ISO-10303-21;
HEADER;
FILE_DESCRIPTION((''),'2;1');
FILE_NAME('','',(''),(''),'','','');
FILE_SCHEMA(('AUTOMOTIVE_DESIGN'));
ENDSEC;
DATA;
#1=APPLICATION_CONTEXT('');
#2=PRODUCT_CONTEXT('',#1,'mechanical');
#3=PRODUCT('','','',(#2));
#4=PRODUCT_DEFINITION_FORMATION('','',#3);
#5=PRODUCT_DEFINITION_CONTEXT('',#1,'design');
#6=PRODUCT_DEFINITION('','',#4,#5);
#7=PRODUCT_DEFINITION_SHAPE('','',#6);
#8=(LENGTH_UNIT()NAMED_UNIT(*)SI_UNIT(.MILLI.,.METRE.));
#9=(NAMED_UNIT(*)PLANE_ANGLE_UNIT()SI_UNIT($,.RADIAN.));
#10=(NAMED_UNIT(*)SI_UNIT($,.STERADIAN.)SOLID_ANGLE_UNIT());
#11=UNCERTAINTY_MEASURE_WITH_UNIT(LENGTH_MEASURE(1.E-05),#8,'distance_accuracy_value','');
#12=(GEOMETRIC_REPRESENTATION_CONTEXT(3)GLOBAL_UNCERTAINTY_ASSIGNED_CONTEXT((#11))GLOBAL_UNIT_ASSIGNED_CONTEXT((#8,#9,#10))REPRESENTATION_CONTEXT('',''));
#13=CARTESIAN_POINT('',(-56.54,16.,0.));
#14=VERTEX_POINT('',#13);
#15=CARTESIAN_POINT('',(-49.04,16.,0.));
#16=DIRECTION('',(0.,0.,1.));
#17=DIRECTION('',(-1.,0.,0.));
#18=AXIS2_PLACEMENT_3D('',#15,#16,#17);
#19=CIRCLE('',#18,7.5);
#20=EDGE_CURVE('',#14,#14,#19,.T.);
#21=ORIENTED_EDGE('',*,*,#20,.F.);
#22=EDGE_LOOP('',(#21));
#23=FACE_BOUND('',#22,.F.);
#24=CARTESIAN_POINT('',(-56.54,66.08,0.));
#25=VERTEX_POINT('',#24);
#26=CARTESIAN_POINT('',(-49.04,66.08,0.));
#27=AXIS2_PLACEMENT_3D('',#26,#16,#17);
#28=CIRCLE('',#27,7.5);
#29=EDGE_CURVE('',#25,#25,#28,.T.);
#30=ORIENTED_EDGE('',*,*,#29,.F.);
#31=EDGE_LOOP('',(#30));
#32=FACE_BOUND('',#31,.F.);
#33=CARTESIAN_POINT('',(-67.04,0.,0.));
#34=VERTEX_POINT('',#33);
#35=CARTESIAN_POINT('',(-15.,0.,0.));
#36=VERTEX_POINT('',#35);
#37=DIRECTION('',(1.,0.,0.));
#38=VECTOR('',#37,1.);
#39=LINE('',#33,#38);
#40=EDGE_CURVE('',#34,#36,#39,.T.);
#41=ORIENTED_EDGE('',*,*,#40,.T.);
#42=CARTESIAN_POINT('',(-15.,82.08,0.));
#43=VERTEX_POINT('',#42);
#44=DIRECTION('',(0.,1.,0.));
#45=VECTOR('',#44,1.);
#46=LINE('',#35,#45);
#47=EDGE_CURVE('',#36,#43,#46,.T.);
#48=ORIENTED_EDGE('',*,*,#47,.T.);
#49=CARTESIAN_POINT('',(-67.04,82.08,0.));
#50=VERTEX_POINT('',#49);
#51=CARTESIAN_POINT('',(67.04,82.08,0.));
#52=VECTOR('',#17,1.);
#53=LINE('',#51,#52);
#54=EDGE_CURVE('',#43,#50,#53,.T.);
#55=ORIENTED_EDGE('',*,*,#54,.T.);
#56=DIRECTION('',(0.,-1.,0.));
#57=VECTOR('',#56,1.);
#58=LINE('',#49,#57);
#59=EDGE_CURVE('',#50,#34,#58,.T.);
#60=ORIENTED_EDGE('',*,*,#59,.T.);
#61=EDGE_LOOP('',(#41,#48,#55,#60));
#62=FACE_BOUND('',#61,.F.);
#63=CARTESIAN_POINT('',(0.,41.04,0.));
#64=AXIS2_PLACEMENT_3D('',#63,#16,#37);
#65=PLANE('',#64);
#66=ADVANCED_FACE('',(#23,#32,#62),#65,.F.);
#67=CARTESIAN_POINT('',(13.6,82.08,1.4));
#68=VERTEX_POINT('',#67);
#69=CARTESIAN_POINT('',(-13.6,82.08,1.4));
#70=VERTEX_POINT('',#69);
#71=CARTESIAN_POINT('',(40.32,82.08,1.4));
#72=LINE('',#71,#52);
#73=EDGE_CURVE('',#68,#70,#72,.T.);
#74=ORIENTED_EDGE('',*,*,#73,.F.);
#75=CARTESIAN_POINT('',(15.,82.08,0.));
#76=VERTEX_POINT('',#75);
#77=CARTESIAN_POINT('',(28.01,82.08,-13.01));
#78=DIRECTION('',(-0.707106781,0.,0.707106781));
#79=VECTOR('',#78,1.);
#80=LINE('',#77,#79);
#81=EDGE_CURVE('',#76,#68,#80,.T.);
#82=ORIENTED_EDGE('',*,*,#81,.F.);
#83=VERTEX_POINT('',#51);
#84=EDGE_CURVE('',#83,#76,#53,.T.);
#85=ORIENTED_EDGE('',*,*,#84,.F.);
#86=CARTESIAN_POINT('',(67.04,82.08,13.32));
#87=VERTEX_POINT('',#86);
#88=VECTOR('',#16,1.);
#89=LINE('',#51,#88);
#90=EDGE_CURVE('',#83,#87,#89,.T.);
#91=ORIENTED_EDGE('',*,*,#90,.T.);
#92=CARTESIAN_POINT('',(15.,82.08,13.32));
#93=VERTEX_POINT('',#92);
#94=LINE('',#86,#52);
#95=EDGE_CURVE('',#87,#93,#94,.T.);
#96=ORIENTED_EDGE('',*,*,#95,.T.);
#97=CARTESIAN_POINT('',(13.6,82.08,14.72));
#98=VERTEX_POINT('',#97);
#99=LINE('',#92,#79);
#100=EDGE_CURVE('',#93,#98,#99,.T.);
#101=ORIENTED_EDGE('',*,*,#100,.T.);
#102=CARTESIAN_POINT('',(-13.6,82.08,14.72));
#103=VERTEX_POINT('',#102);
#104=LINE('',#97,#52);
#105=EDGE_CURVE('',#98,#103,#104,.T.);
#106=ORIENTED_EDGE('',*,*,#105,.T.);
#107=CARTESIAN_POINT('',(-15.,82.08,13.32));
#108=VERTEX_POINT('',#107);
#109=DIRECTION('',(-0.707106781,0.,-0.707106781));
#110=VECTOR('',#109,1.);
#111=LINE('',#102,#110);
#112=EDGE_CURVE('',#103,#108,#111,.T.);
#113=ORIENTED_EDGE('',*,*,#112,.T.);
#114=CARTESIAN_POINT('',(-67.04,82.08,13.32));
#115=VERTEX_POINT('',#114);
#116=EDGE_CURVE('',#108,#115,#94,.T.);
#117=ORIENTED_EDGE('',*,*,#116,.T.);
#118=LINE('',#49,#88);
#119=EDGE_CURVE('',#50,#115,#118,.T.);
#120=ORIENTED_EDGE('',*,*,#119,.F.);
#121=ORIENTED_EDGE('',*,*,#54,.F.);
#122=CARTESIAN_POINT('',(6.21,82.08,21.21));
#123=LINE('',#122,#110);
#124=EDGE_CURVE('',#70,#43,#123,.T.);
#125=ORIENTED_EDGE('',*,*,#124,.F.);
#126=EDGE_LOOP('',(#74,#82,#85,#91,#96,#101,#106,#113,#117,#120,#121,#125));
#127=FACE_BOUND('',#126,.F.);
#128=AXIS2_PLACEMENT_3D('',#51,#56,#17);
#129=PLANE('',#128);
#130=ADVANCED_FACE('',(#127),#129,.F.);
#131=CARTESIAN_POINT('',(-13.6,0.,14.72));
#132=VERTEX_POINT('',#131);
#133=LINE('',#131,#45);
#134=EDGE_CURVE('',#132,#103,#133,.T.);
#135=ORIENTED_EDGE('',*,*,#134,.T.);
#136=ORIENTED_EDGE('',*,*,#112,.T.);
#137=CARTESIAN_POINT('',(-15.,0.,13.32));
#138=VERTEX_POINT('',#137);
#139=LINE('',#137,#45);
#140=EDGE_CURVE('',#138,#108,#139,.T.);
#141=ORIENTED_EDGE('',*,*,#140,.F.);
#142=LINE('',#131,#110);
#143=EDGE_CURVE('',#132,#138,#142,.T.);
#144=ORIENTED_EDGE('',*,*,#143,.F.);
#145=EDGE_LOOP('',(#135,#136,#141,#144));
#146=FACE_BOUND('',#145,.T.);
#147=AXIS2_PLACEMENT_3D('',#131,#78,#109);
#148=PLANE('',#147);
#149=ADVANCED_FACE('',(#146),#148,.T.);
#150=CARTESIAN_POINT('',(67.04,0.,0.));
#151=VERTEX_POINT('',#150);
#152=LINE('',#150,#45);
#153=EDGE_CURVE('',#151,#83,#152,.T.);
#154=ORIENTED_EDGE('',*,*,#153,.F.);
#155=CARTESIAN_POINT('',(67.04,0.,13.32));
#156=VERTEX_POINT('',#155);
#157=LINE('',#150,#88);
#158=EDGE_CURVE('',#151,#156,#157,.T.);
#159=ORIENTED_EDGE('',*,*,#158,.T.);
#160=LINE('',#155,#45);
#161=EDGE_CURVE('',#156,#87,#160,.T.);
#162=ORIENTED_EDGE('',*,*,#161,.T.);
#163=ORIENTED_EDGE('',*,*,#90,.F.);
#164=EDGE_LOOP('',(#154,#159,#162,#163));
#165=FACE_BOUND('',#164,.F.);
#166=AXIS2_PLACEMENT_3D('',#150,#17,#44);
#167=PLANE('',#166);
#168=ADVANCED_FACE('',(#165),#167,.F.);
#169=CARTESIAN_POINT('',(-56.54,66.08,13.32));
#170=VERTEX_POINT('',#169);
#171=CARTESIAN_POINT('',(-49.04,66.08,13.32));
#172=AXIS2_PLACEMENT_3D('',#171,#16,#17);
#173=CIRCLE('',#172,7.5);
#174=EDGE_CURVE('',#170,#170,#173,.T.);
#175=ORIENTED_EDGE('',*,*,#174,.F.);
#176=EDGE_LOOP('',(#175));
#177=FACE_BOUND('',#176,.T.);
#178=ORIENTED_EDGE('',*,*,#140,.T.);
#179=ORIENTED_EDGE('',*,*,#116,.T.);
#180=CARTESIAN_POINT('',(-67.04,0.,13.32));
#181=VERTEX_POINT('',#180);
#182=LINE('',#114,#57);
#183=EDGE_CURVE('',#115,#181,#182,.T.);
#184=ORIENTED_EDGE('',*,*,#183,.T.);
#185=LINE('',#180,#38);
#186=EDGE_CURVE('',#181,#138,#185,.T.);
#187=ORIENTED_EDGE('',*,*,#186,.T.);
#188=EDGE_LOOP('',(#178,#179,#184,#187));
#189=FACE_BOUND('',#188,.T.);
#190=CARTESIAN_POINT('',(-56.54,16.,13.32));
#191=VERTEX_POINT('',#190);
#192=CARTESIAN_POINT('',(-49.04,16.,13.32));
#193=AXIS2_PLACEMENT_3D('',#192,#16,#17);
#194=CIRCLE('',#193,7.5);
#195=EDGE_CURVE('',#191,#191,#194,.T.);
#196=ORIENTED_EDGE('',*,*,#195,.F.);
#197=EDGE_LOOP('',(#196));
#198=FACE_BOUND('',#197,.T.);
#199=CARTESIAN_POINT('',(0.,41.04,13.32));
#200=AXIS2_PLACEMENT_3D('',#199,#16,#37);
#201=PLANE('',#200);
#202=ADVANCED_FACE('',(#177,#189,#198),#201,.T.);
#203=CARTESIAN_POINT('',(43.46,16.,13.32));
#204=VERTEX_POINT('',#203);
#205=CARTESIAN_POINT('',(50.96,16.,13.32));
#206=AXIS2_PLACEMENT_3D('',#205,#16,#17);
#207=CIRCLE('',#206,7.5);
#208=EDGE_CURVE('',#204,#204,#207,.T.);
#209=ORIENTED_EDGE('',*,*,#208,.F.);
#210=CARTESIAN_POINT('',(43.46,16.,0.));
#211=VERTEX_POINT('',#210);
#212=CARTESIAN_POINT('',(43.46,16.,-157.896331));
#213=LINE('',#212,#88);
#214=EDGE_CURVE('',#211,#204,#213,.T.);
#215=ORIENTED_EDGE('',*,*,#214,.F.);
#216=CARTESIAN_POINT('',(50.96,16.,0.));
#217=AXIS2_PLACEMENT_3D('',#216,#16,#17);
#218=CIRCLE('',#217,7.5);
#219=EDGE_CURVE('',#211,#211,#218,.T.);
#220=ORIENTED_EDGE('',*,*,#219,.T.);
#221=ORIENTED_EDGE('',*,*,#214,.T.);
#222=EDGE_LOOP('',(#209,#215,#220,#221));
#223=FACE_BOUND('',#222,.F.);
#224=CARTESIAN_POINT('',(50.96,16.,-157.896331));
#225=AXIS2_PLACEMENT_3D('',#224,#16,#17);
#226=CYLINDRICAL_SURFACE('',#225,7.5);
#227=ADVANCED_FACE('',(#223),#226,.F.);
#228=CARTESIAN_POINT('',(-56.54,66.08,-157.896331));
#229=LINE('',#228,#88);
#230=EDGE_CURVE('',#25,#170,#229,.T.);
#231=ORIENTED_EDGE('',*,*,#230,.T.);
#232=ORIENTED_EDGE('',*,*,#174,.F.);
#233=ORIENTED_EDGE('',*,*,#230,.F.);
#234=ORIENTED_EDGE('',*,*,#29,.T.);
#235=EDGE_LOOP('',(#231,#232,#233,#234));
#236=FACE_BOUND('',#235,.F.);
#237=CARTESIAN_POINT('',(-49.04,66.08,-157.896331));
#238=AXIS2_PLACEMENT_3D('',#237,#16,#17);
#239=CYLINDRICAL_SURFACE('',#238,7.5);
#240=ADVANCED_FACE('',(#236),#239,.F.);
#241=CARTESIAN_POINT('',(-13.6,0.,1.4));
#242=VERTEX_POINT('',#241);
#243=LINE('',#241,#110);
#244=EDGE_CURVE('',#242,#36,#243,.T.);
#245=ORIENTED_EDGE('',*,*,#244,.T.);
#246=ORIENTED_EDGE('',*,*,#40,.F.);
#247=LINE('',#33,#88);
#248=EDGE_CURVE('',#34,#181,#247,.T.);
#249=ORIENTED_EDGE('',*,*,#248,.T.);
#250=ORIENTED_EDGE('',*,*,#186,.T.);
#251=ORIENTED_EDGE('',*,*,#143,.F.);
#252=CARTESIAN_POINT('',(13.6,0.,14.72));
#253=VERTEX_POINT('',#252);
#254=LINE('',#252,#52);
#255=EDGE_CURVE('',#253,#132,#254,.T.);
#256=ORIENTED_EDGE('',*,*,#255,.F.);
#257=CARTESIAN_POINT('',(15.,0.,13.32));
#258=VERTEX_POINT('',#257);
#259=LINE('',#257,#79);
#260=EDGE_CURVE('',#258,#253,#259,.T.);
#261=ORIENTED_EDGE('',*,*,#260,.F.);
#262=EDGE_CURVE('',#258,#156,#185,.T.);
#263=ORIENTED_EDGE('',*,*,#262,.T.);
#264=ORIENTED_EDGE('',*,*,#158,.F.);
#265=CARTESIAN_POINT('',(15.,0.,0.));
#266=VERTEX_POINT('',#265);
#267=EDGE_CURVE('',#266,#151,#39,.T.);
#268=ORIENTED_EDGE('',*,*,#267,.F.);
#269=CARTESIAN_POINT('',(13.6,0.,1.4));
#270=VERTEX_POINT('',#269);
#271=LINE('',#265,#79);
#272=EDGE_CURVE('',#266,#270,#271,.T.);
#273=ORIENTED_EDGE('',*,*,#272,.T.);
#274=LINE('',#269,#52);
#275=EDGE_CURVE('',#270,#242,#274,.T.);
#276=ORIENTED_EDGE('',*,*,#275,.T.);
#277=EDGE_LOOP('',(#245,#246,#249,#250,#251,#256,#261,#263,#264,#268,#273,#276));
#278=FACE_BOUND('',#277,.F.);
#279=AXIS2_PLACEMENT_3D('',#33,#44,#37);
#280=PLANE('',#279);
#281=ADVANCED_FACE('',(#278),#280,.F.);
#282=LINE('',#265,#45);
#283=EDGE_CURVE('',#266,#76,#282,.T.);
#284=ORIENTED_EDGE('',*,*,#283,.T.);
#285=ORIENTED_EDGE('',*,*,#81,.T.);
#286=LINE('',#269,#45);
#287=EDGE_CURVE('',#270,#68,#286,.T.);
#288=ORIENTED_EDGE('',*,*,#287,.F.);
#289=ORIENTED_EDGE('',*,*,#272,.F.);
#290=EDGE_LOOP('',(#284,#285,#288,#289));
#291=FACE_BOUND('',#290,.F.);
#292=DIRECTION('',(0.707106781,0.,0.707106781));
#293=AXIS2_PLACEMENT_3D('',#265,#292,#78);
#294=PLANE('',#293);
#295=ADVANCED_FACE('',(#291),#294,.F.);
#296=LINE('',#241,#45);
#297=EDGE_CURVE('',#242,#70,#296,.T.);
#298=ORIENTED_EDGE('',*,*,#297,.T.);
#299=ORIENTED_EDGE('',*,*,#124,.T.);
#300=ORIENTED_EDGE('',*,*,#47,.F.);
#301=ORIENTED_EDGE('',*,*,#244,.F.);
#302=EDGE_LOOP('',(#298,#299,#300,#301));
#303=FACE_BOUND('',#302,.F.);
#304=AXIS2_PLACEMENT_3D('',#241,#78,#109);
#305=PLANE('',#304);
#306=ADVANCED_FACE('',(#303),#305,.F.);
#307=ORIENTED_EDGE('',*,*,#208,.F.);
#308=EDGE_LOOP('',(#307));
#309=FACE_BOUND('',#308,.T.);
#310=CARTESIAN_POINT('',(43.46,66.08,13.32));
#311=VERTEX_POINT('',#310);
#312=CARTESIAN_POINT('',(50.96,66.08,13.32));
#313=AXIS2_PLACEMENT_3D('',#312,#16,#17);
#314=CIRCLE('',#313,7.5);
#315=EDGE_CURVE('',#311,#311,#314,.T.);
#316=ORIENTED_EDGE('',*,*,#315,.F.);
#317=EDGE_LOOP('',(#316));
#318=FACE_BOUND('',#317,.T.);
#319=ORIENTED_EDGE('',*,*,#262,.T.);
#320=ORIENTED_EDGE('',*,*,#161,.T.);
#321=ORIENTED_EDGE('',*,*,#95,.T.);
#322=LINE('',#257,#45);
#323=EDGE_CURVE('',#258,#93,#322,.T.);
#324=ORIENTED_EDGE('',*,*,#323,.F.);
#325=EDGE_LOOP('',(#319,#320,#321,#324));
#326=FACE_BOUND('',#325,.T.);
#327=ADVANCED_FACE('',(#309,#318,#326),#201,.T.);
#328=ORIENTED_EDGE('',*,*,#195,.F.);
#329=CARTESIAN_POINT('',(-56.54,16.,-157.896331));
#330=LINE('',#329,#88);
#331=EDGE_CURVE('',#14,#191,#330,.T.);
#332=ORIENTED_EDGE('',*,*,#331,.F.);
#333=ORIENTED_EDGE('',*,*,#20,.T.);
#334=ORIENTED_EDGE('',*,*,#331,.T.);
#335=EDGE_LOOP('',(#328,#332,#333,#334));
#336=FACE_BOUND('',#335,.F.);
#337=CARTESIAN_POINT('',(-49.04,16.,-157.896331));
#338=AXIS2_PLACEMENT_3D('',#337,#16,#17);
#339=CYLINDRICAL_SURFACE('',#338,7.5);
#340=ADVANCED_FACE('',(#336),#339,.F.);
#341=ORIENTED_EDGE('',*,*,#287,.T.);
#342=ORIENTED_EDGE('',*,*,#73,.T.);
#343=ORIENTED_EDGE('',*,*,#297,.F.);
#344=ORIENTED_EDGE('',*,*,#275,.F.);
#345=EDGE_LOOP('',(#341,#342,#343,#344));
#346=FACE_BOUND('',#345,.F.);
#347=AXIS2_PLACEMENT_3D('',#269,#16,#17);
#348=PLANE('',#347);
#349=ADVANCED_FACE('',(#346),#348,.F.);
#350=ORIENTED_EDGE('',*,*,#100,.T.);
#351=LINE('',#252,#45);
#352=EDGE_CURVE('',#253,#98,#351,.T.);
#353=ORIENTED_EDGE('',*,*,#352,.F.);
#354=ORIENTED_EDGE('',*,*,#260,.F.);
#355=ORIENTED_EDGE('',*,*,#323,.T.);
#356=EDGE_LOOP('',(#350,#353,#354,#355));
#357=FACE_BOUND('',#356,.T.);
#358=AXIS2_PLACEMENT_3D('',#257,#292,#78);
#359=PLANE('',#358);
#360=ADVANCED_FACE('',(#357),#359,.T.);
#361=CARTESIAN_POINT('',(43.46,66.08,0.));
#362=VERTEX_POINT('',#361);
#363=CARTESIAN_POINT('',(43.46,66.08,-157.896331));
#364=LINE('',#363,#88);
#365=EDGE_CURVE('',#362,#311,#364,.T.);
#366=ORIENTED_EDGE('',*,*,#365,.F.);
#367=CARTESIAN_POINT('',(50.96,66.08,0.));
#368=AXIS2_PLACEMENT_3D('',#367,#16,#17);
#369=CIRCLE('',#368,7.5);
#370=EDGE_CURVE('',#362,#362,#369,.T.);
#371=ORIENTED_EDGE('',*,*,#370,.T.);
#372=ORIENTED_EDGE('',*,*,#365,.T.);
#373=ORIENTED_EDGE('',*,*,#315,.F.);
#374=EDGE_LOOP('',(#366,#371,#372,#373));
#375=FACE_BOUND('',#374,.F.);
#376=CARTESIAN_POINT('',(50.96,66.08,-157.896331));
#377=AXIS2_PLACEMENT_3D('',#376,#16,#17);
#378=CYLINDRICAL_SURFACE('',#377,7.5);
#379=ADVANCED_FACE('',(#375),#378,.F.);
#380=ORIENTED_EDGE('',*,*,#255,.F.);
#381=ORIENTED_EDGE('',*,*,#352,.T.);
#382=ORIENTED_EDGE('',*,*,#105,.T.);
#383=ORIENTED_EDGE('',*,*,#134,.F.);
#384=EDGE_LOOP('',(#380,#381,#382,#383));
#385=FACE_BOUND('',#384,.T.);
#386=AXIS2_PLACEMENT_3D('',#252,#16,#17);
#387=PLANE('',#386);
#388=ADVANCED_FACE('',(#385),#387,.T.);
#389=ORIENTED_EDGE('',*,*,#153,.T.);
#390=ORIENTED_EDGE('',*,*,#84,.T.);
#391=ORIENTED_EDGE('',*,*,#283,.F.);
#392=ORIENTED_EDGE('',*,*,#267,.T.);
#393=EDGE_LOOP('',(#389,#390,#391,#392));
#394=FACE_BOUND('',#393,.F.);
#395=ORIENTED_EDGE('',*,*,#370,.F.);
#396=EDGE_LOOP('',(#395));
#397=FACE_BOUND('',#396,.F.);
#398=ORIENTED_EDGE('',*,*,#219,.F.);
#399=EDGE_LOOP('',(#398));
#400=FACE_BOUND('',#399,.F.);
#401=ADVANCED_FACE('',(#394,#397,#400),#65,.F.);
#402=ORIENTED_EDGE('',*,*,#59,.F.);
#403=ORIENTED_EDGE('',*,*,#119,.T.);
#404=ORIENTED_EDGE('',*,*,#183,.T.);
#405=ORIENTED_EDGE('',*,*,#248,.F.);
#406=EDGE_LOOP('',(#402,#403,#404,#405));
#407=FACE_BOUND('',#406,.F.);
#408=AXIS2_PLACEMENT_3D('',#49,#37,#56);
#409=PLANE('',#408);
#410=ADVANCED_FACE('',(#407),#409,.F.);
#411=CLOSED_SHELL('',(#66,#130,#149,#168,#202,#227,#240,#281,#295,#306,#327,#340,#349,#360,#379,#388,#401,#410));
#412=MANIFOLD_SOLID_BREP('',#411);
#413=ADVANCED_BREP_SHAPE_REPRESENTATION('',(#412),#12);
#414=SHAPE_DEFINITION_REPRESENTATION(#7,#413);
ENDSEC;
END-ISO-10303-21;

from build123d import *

# Parameters (mm, degrees)
F1_DEPTH = 13.32
F4_DEPTH = 82.081
F7_DEPTH = 82.08
F9_D     = 15


with BuildPart() as f1:
    # F0 (on Top) → F1 (new body)
    with BuildSketch(Plane.XY):
        Polygon((-67.04, 0), (0, 0), (67.04, 0), (67.04, 82.08), (-67.04, 82.08), align=None)
    extrude(amount=F1_DEPTH)

    # F3 (on offset) → F4 (cut, through all)
    with BuildSketch(Plane.XZ):
        Polygon((-15, 0), (0, 0), (15, 0), (13.6, 1.4), (-13.6, 1.4), align=None)
    extrude(amount=-F4_DEPTH, mode=Mode.SUBTRACT)

    # F6 (on offset) → F7 (join)
    with BuildSketch(Plane.XZ):
        Polygon((-15, 13.32), (0, 13.32), (15, 13.32), (13.6, 14.72), (-13.6, 14.72), align=None)
    extrude(amount=-F7_DEPTH)

    # F9 (through all)
    with Locations(Plane(origin=(0, 0, 0), x_dir=(1, 0, 0), z_dir=(0, 0, -1))):
        with Locations((-49.04, -66.08), (-49.04, -16), (50.96, -16), (50.96, -66.08)):
            Hole(F9_D / 2)


solid = f1.part
